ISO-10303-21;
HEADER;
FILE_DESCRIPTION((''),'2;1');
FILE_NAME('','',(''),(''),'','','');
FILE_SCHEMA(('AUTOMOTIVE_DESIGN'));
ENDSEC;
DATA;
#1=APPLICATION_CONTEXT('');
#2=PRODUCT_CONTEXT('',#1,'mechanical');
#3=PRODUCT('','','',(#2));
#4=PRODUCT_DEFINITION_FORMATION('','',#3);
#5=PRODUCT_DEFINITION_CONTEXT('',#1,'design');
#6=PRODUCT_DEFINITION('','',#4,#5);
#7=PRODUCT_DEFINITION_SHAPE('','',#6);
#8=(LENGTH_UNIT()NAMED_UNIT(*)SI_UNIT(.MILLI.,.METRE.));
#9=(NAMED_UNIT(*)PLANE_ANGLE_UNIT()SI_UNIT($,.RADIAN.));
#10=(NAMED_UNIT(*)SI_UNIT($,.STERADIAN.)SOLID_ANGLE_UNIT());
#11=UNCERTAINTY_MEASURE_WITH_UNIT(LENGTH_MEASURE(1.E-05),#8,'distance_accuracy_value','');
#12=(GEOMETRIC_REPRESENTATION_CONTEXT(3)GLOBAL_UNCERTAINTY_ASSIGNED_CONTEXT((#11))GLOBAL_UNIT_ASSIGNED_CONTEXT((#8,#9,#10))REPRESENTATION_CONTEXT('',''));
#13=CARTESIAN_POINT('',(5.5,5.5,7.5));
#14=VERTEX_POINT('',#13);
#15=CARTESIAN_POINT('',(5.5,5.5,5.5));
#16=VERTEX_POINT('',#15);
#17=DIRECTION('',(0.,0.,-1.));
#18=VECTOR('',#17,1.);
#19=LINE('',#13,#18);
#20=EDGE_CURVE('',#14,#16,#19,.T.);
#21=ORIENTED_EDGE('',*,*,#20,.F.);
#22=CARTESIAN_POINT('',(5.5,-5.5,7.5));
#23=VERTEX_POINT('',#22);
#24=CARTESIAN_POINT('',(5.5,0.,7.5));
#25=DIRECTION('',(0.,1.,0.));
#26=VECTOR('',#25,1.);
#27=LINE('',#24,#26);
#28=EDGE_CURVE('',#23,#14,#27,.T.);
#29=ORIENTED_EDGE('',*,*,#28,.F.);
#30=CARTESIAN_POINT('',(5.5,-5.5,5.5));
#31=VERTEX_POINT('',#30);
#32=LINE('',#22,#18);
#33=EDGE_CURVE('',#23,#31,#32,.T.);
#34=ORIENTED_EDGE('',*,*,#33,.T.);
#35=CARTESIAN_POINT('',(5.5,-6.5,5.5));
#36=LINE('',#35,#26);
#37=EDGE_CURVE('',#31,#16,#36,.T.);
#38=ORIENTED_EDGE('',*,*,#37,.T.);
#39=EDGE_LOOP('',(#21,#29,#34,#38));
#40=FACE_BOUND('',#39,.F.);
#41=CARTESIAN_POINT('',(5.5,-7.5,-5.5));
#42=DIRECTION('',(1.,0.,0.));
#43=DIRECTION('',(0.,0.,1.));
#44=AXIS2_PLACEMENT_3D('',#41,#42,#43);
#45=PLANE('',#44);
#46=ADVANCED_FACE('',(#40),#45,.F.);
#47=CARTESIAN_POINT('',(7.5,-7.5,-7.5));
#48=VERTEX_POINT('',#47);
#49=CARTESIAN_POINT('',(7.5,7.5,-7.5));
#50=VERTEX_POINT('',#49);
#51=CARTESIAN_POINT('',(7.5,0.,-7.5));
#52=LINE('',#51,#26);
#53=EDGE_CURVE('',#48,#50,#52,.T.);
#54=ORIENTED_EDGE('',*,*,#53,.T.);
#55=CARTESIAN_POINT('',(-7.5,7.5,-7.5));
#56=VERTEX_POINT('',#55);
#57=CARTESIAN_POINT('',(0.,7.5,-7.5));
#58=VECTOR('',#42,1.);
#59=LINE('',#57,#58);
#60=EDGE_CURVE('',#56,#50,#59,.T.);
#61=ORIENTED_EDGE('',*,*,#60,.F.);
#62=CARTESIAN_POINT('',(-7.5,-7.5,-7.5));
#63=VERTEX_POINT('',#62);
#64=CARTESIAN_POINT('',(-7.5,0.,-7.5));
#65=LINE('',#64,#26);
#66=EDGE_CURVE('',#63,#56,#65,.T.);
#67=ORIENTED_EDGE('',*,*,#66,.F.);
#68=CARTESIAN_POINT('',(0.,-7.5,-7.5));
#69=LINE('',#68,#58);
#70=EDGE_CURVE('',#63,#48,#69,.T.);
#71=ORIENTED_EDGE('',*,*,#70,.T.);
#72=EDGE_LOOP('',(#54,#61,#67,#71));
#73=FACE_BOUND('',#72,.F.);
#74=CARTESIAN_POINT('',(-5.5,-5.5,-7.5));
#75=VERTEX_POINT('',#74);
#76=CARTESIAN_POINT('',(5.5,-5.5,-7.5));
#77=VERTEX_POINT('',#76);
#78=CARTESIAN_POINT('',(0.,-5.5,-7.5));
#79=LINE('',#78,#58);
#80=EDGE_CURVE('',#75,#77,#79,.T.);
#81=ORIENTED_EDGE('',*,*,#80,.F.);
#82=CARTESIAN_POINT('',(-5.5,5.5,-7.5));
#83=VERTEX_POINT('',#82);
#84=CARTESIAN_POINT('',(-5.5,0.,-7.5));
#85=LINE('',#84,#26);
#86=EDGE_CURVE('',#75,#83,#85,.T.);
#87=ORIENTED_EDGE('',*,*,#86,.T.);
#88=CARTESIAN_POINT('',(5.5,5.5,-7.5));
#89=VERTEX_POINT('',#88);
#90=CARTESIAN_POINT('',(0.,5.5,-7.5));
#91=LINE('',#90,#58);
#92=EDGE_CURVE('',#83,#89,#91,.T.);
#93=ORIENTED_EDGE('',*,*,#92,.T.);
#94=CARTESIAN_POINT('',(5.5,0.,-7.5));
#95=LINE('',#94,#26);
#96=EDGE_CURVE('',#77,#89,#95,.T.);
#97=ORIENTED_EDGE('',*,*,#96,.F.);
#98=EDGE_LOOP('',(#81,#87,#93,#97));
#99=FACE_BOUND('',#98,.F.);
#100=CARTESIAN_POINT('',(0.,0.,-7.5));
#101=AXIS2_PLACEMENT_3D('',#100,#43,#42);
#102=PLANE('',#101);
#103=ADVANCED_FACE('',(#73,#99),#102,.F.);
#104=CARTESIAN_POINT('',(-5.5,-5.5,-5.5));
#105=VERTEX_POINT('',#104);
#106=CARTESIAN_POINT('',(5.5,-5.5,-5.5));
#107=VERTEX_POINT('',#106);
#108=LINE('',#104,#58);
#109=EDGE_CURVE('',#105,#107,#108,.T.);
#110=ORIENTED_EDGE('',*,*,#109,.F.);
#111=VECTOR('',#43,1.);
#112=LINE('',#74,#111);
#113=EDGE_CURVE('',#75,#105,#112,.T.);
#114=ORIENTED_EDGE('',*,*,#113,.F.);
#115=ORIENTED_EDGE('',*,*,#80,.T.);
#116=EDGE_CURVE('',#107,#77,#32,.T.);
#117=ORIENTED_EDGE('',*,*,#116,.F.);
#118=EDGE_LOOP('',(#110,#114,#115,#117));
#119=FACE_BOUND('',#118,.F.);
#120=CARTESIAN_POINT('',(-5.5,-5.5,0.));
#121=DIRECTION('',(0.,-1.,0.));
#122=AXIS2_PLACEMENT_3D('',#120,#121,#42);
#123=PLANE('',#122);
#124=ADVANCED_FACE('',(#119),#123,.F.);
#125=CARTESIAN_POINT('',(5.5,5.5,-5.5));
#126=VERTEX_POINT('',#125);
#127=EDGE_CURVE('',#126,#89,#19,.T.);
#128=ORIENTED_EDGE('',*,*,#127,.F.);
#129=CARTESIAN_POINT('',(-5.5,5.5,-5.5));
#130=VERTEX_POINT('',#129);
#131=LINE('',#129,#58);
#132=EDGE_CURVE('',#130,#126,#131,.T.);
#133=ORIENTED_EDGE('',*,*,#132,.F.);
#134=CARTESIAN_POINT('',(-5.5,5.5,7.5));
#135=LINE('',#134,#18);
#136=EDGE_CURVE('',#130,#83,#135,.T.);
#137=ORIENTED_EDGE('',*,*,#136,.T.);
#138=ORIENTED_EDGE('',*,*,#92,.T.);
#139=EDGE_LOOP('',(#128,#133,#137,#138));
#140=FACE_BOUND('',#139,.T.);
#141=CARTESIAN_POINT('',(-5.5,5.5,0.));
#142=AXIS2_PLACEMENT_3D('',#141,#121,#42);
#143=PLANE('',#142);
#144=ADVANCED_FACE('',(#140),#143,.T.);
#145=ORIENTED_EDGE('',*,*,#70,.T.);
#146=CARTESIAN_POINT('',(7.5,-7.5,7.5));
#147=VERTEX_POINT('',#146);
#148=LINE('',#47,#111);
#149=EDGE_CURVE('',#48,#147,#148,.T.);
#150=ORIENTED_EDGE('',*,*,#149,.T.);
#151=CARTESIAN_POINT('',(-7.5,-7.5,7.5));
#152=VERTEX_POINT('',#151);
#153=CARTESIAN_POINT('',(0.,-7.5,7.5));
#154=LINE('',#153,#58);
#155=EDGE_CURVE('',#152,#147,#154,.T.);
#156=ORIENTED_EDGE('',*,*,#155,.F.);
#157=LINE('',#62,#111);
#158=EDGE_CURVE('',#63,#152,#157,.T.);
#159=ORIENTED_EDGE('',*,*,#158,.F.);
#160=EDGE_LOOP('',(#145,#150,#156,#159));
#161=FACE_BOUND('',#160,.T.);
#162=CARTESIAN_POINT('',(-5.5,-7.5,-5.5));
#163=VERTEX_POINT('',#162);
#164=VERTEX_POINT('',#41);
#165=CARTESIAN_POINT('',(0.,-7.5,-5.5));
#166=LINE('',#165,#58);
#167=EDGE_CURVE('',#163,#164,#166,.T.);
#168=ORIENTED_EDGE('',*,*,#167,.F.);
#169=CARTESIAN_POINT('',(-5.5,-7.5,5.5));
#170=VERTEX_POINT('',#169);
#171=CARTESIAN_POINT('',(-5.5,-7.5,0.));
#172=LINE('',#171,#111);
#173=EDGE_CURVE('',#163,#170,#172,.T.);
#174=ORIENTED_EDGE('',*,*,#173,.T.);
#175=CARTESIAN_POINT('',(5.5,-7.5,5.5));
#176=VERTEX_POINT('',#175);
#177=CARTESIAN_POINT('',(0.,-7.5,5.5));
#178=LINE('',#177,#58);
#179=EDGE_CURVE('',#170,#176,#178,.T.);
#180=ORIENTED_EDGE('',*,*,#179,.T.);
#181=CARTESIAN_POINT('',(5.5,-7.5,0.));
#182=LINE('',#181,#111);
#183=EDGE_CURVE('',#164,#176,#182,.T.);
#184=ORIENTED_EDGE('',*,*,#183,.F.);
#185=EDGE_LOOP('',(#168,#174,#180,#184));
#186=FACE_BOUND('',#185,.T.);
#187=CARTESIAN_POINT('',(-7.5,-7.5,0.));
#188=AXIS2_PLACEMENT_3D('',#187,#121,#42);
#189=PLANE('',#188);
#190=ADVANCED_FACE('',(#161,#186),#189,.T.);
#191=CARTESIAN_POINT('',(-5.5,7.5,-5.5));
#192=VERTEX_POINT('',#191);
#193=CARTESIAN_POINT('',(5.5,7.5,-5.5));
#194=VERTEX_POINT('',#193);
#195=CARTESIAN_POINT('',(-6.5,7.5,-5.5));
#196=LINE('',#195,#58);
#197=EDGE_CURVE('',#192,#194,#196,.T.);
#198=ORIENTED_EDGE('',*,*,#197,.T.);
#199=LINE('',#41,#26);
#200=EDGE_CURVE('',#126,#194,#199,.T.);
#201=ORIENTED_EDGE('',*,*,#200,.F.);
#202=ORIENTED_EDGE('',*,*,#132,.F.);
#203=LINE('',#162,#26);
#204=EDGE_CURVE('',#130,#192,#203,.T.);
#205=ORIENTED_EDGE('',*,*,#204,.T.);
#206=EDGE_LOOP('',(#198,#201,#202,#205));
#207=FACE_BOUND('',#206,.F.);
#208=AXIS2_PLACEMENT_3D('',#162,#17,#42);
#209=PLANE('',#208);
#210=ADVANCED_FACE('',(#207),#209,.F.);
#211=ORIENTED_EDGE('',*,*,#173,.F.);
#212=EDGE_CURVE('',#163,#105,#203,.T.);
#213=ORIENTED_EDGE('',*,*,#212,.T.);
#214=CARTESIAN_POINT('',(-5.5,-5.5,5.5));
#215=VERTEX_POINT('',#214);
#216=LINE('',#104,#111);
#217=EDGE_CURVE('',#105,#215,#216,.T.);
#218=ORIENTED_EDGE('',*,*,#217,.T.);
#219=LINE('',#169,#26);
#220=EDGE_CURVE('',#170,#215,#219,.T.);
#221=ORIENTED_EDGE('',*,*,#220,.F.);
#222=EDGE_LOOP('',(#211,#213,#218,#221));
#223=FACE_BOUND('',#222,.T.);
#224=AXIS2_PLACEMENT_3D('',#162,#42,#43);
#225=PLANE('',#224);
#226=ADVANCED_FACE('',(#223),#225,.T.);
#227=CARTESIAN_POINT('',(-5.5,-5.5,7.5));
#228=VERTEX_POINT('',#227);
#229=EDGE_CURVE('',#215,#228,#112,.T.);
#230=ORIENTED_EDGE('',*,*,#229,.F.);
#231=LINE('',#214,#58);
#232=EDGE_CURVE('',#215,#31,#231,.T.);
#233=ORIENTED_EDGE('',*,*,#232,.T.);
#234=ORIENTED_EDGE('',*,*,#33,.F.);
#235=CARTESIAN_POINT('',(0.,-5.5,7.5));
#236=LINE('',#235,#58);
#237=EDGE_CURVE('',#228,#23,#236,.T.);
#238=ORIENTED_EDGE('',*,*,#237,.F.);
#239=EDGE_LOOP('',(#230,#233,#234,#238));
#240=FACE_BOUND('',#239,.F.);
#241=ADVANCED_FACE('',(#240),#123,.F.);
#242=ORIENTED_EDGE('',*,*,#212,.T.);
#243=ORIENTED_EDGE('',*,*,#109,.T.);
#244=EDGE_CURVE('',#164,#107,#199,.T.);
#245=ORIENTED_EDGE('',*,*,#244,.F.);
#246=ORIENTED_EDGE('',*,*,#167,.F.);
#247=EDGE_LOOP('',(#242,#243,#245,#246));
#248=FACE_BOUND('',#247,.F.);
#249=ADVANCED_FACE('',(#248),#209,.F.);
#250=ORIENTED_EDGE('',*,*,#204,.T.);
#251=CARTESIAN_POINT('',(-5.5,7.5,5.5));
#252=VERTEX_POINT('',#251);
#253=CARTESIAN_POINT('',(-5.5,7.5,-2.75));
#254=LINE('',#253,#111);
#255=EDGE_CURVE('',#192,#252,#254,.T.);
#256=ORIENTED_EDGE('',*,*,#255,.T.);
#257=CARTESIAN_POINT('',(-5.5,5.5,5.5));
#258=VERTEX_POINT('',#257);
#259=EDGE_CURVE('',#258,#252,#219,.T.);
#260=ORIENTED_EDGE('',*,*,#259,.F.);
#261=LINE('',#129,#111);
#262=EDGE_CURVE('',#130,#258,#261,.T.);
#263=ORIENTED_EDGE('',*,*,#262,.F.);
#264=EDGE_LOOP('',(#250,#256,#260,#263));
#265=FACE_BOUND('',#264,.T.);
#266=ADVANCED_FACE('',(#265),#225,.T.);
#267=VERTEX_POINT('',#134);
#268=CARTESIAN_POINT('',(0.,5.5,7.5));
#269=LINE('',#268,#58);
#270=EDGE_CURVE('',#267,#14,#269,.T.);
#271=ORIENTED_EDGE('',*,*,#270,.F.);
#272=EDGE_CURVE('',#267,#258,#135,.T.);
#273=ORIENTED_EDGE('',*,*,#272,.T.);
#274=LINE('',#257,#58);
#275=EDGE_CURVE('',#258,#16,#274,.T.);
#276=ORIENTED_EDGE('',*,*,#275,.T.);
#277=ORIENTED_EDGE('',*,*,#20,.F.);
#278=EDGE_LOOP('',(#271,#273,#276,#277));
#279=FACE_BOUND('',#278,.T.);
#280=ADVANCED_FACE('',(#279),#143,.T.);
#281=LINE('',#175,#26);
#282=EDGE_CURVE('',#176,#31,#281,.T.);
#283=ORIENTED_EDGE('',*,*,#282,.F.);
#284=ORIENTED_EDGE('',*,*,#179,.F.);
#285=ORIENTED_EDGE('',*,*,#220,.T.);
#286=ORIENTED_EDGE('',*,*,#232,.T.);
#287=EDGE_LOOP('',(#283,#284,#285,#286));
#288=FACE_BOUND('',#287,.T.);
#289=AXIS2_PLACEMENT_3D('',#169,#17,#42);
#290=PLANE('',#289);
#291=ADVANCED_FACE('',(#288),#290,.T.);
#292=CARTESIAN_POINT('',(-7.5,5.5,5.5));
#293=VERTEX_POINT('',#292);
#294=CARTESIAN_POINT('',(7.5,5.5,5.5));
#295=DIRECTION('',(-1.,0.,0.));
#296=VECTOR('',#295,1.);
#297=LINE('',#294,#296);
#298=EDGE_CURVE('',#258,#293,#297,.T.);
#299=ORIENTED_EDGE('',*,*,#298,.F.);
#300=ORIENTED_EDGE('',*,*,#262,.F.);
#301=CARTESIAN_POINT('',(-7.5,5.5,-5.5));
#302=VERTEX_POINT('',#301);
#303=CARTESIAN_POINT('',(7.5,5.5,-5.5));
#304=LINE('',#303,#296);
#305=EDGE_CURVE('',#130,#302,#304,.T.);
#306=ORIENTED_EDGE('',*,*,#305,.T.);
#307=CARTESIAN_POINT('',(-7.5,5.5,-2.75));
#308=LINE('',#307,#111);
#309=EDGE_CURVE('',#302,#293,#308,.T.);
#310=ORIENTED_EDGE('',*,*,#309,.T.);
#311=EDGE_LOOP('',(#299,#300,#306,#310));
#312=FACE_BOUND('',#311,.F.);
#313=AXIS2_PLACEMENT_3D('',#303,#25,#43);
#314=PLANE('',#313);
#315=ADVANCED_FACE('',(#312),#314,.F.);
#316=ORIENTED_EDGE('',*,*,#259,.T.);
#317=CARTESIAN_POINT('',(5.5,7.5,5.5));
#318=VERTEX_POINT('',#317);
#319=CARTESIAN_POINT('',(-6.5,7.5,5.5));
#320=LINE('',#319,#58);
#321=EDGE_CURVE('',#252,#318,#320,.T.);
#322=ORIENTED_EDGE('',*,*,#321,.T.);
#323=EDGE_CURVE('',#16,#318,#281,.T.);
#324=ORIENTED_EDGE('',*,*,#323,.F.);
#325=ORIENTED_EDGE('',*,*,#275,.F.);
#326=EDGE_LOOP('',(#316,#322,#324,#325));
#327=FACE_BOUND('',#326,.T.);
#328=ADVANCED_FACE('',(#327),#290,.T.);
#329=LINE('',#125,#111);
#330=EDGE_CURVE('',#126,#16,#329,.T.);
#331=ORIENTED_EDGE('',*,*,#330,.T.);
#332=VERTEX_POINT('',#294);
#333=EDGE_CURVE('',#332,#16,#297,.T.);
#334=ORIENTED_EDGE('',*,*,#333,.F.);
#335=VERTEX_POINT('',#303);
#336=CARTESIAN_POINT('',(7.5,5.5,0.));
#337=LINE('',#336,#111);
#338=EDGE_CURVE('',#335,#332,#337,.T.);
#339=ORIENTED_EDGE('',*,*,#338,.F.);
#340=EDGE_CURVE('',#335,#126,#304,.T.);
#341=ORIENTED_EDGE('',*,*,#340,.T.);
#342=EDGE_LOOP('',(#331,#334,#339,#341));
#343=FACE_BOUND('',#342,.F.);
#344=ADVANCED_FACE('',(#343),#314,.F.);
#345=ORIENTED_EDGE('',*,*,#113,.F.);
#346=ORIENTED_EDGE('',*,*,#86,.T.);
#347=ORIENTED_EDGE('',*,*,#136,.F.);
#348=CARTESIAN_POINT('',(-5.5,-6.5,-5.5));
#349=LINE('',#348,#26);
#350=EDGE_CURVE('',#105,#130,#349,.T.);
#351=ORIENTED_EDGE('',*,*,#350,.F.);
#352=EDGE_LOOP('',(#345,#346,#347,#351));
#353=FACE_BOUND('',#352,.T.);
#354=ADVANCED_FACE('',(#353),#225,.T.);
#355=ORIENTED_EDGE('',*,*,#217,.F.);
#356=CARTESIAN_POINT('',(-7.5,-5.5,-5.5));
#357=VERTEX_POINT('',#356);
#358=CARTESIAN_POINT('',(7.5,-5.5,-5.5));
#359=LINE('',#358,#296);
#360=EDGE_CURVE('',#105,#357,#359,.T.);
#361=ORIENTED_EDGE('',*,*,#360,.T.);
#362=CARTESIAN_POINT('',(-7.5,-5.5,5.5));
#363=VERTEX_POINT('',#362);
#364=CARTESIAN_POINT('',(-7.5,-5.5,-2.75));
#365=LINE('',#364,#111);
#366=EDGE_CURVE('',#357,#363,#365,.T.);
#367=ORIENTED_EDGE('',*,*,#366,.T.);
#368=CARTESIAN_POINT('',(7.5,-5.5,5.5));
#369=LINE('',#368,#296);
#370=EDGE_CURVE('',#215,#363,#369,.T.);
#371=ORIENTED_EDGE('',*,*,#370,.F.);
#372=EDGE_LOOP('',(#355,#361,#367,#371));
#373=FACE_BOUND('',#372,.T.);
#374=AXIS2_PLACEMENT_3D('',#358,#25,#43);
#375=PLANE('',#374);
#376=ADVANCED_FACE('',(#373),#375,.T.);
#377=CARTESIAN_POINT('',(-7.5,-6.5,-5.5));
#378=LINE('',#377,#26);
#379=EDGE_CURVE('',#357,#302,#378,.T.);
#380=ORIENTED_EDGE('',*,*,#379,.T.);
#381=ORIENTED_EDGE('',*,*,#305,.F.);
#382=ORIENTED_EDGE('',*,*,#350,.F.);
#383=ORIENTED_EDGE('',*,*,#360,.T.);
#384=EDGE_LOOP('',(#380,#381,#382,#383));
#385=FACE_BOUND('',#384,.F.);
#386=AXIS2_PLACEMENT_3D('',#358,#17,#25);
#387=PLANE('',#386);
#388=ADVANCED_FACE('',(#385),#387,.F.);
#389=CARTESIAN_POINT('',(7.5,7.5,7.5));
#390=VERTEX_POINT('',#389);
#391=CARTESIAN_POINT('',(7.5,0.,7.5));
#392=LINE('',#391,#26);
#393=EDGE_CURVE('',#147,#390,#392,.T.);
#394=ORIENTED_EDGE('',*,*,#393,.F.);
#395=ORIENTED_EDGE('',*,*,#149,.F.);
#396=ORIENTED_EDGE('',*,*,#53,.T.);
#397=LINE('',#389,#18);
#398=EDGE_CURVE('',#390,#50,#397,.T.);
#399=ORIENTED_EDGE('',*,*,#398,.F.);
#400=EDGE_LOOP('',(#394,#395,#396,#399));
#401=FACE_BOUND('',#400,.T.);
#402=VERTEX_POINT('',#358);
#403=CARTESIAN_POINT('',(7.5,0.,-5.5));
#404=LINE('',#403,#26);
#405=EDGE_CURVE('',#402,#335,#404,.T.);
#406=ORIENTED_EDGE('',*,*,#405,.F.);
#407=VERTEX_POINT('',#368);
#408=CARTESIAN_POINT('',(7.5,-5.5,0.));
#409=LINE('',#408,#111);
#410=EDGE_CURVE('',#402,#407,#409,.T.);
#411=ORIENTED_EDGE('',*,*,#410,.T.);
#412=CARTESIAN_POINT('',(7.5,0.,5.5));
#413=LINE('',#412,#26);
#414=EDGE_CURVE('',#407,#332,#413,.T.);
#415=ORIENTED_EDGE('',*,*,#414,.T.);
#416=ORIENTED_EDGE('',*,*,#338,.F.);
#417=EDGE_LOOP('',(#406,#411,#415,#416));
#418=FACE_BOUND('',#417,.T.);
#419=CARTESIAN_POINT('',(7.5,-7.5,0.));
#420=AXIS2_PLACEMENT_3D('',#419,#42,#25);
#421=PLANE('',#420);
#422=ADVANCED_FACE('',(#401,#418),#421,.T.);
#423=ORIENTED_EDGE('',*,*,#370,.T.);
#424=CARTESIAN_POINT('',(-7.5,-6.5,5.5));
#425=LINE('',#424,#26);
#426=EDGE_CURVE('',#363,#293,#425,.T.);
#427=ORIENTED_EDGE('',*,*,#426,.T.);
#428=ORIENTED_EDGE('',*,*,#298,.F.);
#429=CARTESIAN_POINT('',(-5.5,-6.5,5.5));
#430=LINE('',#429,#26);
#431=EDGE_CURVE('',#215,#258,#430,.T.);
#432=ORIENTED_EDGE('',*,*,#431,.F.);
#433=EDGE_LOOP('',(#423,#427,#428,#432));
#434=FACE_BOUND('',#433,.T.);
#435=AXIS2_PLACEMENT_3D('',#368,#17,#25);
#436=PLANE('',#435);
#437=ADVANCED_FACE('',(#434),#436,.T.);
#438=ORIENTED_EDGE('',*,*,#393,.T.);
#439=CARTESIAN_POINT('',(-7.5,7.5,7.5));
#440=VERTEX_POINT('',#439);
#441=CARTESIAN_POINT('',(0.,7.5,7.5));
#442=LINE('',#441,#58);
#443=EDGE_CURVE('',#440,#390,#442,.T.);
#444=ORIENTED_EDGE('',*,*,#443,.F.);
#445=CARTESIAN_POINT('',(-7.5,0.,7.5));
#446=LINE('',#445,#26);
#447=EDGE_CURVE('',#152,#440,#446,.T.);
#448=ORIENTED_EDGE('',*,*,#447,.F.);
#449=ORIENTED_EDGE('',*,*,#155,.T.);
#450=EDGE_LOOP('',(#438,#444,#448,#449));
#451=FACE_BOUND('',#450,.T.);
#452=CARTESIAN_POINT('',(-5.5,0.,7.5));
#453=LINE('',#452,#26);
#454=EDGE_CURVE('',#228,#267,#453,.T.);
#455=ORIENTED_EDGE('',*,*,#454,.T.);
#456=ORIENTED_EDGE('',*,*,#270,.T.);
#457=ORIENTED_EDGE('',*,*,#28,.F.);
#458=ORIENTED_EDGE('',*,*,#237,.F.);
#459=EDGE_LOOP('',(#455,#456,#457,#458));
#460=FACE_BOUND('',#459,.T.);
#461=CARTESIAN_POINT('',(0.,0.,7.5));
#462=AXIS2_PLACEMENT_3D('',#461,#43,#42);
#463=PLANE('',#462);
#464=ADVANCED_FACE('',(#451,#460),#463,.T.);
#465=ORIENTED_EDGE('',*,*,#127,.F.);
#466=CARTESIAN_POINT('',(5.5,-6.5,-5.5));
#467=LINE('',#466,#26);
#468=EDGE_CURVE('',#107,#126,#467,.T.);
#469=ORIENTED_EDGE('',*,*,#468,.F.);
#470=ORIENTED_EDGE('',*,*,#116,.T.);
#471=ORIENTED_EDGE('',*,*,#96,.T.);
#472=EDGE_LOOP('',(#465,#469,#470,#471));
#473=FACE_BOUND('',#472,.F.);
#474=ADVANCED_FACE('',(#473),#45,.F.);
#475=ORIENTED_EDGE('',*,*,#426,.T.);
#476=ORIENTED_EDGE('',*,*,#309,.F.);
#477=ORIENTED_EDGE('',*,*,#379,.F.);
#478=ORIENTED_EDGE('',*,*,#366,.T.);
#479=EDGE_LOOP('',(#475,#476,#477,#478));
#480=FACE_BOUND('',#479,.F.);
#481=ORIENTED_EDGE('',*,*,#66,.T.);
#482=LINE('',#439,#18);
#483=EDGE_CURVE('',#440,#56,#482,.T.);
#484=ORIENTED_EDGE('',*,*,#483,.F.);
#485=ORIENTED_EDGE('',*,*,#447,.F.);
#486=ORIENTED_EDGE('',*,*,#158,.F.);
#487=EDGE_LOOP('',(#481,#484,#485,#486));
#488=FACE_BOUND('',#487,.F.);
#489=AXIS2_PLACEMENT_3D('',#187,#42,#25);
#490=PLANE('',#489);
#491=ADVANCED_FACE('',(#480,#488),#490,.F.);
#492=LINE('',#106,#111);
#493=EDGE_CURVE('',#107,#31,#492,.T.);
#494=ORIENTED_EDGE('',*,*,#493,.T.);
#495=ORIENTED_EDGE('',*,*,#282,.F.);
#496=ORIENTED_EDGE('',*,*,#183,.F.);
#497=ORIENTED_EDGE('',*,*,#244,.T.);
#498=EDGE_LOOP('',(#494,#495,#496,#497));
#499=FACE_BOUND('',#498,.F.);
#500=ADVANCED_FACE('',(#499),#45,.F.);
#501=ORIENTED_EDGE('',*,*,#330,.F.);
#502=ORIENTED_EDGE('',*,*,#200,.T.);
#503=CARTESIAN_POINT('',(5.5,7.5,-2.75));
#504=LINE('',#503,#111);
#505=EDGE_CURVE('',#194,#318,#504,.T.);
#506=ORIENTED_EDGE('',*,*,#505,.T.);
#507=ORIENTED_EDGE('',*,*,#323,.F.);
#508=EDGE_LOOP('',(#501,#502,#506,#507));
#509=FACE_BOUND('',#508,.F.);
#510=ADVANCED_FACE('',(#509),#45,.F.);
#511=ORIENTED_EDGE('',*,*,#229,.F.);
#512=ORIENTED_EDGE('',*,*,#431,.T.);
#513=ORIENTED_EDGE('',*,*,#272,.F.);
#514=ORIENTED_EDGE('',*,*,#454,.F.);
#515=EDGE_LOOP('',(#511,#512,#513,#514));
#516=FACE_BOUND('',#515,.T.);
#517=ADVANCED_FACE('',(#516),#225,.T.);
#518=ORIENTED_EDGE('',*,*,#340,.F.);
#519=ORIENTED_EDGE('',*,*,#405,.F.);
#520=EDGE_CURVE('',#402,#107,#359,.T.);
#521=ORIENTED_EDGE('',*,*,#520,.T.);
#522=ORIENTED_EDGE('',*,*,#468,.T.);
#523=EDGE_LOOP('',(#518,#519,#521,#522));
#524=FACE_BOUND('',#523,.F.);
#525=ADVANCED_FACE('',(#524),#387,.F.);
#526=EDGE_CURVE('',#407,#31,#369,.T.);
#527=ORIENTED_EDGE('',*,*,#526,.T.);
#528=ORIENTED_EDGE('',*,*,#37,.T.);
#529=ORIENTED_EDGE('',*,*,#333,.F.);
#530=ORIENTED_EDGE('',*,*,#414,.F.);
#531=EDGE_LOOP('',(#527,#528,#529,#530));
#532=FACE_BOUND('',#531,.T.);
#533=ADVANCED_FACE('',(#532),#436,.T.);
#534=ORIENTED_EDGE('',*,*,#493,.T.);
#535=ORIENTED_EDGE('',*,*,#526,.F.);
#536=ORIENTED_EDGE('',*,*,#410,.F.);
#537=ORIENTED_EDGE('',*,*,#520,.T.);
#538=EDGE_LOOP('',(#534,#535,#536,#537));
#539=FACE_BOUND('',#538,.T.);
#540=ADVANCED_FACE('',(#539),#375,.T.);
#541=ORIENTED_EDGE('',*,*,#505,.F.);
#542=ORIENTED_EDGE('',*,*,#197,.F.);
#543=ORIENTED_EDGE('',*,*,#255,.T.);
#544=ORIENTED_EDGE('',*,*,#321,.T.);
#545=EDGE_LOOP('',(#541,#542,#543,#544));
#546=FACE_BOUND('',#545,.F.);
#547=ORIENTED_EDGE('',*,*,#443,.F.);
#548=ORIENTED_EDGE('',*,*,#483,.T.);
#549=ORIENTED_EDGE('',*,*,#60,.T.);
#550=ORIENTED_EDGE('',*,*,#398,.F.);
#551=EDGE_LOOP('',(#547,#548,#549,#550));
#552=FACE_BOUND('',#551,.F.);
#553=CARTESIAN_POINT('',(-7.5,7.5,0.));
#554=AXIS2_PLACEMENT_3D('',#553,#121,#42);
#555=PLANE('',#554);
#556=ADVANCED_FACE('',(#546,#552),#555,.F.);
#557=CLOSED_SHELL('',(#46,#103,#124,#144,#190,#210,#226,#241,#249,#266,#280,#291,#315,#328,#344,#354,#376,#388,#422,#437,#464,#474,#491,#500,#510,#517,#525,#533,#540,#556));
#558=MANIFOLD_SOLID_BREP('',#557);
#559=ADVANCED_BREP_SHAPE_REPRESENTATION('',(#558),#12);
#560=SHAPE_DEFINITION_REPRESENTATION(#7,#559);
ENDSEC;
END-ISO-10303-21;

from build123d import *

# Parameters (mm, degrees)
F0_W          = 15
F0_H          = 15
F0_W_2        = 11
F0_H_2        = 11
F1_DEPTH      = 7.5
F1_DEPTH_BACK = 7.5
F2_W          = 11
F2_H          = 11
F3_DEPTH      = 25
F4_W          = 11
F4_H          = 11
F5_DEPTH      = 15.001


# Not quite as in the source:
# - the program builds the solid bodies; features that only make, move or delete a surface that nothing else refers to are left out


with BuildPart() as f1:
    # F0 (on Top) → F1 (new body, two sides)
    with BuildSketch(Plane.XY) as f1_sk:
        Rectangle(F0_W, F0_H)
        Rectangle(F0_W_2, F0_H_2, mode=Mode.SUBTRACT)
    extrude(amount=F1_DEPTH)
    extrude(f1_sk.sketch, amount=-F1_DEPTH_BACK)

    # F2 (on face) → F3 (cut)
    with BuildSketch(Plane.XZ.offset(7.5)):
        Rectangle(F2_W, F2_H)
    extrude(amount=-F3_DEPTH, mode=Mode.SUBTRACT)

    # F4 (on face) → F5 (cut, through all)
    with BuildSketch(Plane.YZ.offset(7.5)):
        Rectangle(F4_W, F4_H)
    extrude(amount=-F5_DEPTH, mode=Mode.SUBTRACT)


solid = f1.part
